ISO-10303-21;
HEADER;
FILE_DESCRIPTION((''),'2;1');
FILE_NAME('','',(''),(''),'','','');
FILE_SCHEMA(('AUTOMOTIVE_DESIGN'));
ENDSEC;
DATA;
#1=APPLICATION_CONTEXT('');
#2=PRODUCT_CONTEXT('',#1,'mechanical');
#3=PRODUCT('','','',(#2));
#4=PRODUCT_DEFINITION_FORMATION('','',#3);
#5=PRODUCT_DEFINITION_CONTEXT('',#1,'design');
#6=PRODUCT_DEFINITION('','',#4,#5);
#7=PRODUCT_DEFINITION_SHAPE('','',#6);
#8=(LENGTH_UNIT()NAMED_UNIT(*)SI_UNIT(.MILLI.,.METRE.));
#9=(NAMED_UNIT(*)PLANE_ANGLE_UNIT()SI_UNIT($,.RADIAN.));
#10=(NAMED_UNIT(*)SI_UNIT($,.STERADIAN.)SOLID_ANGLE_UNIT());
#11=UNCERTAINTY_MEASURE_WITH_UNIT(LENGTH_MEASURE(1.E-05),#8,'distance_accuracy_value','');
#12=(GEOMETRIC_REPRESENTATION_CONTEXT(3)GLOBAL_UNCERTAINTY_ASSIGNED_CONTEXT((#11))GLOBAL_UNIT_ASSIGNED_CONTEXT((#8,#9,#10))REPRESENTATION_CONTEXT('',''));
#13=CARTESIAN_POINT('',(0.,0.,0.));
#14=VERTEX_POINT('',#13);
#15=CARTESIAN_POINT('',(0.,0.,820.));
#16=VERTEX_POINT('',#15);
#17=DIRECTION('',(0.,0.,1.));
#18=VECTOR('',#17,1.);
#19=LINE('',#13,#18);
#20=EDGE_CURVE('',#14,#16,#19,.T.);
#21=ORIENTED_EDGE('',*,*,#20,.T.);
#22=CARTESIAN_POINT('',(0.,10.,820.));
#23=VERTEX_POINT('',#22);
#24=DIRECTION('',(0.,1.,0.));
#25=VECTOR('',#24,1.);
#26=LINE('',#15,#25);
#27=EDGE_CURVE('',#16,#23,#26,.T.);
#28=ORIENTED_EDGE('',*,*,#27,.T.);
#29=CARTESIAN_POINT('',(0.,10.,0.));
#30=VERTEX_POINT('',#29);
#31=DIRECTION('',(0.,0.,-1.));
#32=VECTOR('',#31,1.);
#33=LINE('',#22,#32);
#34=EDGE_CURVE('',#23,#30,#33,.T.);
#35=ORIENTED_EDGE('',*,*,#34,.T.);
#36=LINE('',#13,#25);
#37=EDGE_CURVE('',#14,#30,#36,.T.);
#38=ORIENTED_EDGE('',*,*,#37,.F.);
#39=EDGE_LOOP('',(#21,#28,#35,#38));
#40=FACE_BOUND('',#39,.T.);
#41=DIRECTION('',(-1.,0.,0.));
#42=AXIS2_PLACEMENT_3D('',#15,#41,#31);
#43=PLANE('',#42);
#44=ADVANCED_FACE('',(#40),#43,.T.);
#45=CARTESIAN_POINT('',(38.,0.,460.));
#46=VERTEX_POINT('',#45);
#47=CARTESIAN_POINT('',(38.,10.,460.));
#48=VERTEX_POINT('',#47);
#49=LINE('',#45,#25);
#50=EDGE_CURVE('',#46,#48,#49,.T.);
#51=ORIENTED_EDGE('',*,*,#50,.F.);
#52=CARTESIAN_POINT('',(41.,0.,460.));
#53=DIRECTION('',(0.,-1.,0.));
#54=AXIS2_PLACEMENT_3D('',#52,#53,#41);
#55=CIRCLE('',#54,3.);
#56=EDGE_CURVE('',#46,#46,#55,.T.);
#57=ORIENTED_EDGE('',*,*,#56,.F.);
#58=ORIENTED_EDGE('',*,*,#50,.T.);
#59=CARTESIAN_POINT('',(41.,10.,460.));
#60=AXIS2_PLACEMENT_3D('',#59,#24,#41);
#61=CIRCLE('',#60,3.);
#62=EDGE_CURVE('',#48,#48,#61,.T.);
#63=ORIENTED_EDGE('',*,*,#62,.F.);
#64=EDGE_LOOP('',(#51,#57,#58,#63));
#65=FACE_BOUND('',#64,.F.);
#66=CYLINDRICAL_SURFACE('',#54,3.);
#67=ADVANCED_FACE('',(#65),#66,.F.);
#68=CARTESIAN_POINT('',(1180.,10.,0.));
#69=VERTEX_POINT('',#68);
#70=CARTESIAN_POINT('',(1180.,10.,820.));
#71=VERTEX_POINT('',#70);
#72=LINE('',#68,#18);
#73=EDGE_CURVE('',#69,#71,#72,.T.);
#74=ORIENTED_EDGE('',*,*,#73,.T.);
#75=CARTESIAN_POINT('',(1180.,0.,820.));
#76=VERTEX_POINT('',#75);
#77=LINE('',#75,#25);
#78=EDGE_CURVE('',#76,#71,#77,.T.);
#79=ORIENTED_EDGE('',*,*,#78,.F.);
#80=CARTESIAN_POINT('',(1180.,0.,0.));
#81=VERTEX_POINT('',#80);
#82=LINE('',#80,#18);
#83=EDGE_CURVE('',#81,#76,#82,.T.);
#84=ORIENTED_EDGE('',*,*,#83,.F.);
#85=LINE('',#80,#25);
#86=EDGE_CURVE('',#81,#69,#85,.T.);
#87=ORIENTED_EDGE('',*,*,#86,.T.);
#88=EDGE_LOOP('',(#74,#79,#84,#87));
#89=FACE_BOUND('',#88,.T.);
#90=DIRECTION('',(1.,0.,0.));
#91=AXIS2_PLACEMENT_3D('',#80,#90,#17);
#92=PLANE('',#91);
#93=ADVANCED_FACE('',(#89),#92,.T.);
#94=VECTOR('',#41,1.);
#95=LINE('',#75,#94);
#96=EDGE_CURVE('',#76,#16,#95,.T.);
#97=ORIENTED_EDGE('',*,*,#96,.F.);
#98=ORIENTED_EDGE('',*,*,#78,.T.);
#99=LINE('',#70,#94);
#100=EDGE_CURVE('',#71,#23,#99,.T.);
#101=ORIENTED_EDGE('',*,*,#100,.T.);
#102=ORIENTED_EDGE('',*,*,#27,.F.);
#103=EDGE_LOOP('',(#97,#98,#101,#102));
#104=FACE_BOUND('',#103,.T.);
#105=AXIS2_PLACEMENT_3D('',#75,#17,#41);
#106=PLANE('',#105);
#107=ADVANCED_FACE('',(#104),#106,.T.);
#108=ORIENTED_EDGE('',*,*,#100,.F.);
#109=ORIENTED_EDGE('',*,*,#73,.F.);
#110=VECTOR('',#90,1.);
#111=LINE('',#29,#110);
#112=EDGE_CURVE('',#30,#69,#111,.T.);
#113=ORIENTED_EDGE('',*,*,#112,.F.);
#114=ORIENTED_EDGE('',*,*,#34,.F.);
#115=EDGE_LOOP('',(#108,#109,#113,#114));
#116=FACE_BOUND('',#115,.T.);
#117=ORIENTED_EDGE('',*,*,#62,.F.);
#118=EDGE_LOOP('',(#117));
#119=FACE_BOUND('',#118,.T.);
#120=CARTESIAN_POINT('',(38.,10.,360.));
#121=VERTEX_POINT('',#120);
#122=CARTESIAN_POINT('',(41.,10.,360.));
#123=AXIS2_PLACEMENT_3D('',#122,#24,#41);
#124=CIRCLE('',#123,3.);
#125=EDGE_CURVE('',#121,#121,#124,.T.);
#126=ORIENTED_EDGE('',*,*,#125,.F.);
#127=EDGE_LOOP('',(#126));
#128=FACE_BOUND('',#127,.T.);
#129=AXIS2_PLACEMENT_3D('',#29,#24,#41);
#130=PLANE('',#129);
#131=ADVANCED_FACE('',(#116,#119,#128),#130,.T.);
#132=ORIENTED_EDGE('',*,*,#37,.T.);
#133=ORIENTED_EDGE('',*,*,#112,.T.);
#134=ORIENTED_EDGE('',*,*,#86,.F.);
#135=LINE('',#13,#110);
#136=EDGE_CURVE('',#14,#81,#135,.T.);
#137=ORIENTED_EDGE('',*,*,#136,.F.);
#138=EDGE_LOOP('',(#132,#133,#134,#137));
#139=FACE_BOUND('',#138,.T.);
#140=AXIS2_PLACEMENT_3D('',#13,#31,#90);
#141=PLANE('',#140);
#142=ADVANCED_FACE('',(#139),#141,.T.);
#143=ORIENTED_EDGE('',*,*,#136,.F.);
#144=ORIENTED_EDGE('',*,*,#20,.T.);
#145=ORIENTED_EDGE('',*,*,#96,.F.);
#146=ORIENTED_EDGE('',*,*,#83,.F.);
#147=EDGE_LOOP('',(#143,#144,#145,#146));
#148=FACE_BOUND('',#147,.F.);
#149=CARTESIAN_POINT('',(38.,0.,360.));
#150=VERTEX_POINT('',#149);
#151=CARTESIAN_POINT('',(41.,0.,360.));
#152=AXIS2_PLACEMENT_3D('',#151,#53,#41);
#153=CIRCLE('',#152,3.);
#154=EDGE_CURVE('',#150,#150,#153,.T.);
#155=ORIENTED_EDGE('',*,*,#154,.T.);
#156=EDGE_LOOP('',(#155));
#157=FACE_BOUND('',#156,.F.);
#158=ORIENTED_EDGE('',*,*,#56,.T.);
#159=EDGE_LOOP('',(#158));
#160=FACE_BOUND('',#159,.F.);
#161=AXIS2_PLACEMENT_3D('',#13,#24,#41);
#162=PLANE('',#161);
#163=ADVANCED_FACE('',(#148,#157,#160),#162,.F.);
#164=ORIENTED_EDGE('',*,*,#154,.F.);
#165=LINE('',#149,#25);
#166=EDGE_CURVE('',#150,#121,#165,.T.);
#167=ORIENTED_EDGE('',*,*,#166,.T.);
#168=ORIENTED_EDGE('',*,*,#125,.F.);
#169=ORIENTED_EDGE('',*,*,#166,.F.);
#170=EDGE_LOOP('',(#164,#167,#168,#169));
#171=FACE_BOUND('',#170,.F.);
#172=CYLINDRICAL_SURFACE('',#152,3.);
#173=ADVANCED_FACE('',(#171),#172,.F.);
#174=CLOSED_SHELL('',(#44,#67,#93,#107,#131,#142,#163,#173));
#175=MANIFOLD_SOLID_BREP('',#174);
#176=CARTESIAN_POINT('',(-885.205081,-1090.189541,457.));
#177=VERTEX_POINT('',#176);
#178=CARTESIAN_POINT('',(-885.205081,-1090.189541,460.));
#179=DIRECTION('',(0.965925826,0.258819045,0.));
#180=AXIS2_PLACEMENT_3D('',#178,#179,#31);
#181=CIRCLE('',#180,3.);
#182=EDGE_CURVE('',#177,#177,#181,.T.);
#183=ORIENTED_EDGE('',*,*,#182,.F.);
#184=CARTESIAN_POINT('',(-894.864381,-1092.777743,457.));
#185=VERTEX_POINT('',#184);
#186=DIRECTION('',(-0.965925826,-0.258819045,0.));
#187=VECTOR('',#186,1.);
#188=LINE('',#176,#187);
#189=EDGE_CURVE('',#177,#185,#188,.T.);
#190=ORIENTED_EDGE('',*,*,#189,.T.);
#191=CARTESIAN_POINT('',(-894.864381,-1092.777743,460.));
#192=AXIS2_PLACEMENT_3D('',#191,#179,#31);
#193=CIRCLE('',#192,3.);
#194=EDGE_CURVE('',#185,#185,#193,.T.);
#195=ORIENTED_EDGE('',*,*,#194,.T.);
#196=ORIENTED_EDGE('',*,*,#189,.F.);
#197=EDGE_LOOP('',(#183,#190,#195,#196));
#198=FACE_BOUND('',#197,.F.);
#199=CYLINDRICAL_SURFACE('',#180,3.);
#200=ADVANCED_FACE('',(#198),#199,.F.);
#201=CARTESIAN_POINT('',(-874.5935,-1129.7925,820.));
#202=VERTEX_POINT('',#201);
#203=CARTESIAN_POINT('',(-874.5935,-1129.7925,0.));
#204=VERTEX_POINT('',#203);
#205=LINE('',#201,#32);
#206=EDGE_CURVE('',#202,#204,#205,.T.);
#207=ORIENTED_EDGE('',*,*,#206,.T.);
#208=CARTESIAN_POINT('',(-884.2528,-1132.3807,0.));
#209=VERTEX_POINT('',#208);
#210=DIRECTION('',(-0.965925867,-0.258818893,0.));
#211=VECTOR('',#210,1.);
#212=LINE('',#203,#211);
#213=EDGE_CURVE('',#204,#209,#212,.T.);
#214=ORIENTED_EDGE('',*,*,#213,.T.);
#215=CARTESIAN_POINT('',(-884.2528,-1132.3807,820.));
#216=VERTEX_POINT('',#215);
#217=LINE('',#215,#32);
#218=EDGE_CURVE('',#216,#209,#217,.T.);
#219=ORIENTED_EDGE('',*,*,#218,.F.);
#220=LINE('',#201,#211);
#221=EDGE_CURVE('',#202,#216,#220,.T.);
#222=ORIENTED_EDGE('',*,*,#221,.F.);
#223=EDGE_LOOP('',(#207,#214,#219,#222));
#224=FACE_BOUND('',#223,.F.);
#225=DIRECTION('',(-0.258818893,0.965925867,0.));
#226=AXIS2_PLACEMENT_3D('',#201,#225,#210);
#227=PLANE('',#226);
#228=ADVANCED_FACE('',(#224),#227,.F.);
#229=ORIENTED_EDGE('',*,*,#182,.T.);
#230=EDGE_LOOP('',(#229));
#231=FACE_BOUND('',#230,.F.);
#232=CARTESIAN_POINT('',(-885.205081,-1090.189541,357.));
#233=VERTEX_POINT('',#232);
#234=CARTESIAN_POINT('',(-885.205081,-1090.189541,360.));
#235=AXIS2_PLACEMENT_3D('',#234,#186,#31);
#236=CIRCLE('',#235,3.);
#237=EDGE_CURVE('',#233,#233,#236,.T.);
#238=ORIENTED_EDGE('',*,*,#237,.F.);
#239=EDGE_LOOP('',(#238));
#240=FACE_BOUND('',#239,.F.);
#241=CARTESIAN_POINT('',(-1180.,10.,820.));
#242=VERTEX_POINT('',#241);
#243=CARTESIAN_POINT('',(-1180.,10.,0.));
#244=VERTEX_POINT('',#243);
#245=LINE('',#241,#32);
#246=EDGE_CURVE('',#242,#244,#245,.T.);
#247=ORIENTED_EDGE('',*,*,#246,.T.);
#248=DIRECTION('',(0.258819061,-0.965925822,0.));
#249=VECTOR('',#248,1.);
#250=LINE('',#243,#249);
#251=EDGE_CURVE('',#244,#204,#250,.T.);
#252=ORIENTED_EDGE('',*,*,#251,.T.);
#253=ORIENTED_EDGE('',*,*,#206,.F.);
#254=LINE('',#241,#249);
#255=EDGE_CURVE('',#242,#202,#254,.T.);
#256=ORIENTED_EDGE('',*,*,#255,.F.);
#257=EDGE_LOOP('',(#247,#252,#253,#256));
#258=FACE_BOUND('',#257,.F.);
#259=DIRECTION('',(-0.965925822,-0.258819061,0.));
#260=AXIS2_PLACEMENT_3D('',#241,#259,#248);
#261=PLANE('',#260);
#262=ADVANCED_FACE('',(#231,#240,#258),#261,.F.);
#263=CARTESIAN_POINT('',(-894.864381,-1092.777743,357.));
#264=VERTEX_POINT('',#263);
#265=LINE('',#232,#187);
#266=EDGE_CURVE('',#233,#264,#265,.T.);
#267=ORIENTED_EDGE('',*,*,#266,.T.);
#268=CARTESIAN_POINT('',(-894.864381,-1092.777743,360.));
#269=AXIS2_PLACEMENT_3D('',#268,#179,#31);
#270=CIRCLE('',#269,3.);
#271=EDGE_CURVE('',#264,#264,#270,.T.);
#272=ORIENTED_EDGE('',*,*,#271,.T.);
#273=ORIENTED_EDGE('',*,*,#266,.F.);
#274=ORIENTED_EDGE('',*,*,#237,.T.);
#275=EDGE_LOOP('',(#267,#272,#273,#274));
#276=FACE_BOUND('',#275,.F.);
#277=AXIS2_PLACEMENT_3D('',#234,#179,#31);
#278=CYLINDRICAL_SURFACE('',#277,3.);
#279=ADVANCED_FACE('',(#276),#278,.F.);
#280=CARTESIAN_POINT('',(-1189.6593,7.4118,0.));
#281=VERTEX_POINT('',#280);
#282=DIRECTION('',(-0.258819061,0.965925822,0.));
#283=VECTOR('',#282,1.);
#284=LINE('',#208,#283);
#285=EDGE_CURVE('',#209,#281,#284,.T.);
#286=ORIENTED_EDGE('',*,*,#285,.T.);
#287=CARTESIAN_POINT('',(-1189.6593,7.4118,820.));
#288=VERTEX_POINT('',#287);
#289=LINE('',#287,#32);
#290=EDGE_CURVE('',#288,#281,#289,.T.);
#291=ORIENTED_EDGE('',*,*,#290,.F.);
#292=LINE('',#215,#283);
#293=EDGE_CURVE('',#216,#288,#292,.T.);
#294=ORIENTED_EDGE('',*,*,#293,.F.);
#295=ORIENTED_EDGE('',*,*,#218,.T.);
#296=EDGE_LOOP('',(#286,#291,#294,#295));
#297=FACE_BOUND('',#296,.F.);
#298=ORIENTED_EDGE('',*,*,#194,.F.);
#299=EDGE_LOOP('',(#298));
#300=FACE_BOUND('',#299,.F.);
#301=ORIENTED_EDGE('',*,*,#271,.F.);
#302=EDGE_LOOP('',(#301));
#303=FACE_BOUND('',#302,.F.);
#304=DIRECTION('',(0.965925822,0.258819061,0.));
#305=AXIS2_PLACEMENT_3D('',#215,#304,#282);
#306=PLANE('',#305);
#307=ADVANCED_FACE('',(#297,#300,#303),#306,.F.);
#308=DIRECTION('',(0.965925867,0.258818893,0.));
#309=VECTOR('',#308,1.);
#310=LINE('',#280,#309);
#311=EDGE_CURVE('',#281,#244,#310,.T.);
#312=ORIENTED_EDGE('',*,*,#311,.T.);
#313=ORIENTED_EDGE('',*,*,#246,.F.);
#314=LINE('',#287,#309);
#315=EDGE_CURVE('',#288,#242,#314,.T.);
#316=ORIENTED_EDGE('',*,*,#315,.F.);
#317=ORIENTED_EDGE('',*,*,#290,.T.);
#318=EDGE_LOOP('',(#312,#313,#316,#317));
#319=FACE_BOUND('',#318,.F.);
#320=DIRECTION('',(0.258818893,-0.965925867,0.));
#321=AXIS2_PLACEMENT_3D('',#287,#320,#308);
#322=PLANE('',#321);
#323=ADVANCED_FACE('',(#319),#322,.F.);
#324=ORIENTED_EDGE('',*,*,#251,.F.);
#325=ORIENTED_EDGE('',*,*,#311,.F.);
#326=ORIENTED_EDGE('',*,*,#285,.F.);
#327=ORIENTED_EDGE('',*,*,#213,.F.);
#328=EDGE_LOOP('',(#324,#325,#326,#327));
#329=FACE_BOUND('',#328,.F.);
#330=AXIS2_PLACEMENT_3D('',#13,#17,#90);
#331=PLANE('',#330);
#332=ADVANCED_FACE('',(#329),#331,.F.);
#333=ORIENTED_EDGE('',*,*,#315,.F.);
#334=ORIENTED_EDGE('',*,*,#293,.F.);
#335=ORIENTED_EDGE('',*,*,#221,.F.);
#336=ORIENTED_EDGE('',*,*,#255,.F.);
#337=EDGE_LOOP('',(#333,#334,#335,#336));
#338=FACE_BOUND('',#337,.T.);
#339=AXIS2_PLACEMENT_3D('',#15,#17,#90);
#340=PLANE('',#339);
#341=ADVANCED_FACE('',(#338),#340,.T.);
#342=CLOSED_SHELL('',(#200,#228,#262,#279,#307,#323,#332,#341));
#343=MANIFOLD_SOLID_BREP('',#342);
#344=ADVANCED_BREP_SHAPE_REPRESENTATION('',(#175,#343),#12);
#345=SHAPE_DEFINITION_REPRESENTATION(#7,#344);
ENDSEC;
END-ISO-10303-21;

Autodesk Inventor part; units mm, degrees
ref_plane "YZ Plane" through (0, 0, 0) normal (1, 0, 0) x (0, 1, 0)
ref_plane "XZ Plane" through (0, 0, 0) normal (0, 1, 0) x (-1, 0, 0)
ref_plane "XY Plane" through (0, 0, 0) normal (0, 0, 1) x (1, 0, 0)
sketch "Sketch1" plane through (0, 0, 0) normal (0, 1, 0) x (-1, 0, 0)
  line L0 (0, 0) -> (-1180, 0)
  line L1 (-1180, 0) -> (-1180, 820)
  line L2 (-1180, 820) -> (0, 820)
  line L3 (0, 820) -> (0, 0)
  line L4 (0, 410) -> (-41, 410)
  line L5 (-41, 410) -> (-41, 460)
  line L6 (-41, 460) -> (-41, 360)
  circle A0 centre (-41, 460) radius 3
  circle A1 centre (-41, 360) radius 3
  dimension "ancho_m" = 1180
  dimension "h_inf" = 820
  dimension "d2" = 41
  dimension "d3" = 50
  dimension "d4" = 100
  dimension "d5" = 6
  dimension "d6" = 6
extrude "Extrusion1" add sketch "Sketch1" along normal blind 10
sketch "Boceto10" plane through (0, 0, 820) normal (0, 0, 1) x (1, 0, 0)
  line L0 (1180, 10) -> (0, 10) projected
  line L1 (0, 10) -> (-1180, 10)
  line L2 (-1180, 10) -> (-874.5935, -1129.7925)
  line L3 (-1180, 10) -> (0, 10) construction
  line L4 (-874.5935, -1129.7925) -> (-884.2528, -1132.3807)
  line L5 (-884.2528, -1132.3807) -> (-1189.6593, 7.4118)
  line L6 (-1189.6593, 7.4118) -> (-1180, 10)
  point P0 (0, 0)
  dimension "d49" = 1180
  dimension "d50" = 1180
  dimension "angulo" = 75
  dimension "d52" = 10
  dimension "d53" = 1180
extrude "Extrusión10" add sketch "Boceto10" against normal blind 820
sketch "Boceto11" plane through (-874.5935, -1129.7925, 820) normal (0.9659258, 0.258819, 0) x (0, 0, -1)
  line L0 (0, 1180) -> (0, 0) projected
  line L1 (0, 0) -> (820, 0) projected
  line L2 (820, 1180) -> (820, 0) projected
  line L3 (0, 1180) -> (820, 1180) projected
  line L4 (0, 0) -> (820, 0) projected
  line L5 (410, 0) -> (410, 41)
  line L6 (410, 41) -> (360, 41)
  line L7 (360, 41) -> (460, 41)
  circle A0 centre (360, 41) radius 3
  circle A1 centre (460, 41) radius 3
  point P0 (820, 864.9343)
  dimension "d56" = 41
  dimension "d57" = 50
  dimension "d58" = 100
  dimension "d59" = 6
  dimension "d60" = 6
extrude "Extrusión11" cut sketch "Boceto11" against normal up to next contours A0 | A1
equation "\"d2\" = 0.05 * h_inf"
equation "\"d49\" = ancho_m"
equation "\"d50\" = ancho_m"
equation "\"d52\" = espesor"
equation "\"d53\" = ancho_m"
equation "\"d54\" = h_inf"
equation "\"d56\" = 0.05 * h_inf"
equation "\"d61\" = h_inf"
equation "\"espesor\" = 10"
properties part number "puerta_inf"
